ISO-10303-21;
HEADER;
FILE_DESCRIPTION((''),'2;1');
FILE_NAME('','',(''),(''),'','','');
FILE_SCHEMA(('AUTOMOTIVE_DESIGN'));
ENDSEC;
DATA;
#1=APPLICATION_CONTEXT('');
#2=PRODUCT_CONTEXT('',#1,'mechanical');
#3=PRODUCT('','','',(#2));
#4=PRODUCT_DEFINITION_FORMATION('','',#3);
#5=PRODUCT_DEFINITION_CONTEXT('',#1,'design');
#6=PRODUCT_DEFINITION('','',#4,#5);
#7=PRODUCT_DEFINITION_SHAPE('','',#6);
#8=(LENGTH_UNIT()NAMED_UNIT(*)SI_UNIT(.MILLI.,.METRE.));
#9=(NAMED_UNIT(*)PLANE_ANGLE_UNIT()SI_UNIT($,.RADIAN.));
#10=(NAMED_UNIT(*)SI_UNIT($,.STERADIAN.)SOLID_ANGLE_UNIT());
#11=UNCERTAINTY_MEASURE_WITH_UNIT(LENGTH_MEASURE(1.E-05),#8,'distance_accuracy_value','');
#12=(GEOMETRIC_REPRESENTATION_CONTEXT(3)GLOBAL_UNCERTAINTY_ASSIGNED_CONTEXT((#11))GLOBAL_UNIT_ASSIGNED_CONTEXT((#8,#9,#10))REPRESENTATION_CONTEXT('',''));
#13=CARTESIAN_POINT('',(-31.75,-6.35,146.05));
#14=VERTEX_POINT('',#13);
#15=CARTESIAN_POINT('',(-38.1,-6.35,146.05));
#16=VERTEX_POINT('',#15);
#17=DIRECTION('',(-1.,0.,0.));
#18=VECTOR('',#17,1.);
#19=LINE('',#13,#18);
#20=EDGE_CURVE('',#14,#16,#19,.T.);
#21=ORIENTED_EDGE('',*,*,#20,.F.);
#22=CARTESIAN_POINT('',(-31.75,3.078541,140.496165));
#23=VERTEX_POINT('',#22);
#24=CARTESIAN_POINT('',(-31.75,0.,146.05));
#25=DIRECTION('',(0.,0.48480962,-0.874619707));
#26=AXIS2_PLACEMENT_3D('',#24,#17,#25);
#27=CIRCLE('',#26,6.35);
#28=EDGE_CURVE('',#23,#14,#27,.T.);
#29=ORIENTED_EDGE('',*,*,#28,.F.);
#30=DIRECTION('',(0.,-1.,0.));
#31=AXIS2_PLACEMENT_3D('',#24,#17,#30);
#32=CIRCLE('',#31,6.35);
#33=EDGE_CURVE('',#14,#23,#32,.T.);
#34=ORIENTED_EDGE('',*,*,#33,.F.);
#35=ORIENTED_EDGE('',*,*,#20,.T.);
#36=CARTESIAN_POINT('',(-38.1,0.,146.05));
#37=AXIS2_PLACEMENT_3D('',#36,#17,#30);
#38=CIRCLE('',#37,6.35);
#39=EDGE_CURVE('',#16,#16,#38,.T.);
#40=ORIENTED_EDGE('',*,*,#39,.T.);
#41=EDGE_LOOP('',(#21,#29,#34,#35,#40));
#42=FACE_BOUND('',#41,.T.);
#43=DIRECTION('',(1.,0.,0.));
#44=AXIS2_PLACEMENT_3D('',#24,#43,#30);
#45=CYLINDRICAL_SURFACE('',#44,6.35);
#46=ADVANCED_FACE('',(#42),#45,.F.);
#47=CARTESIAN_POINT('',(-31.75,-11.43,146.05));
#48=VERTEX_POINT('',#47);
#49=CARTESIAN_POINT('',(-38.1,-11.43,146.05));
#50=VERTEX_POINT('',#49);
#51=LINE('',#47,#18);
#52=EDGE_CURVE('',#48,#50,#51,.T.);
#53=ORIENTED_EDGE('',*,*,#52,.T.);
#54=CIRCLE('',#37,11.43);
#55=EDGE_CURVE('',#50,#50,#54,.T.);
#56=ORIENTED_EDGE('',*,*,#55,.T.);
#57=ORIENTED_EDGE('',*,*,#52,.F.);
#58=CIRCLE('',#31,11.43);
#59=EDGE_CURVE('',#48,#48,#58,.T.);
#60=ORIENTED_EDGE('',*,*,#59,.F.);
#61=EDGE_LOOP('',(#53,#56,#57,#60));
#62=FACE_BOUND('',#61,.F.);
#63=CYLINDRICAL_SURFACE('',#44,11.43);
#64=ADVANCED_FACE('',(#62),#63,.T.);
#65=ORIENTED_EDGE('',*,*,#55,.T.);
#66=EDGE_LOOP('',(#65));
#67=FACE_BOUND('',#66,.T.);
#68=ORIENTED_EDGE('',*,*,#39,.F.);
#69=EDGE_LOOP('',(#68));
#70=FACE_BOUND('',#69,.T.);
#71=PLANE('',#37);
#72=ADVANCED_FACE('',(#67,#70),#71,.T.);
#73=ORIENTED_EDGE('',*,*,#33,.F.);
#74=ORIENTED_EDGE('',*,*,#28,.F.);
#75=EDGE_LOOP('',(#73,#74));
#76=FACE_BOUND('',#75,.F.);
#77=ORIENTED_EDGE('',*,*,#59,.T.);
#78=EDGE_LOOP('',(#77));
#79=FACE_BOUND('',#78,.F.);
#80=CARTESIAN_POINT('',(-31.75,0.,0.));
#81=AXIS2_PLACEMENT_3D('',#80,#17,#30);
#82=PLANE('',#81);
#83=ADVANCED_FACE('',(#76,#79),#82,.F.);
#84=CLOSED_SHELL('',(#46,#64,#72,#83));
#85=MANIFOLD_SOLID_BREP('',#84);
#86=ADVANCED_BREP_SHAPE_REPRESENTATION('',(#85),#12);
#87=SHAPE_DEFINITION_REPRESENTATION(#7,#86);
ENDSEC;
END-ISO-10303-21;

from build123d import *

# Parameters (mm, degrees)
F0_W      = 63.5
F0_H      = 63.5
F0_W_2    = 50.8
F0_H_2    = 50.8
F1_DEPTH  = 165.1
F3_R      = 6.35
F4_DEPTH  = 25.4
F6_DEPTH  = 25.4
F7_R      = 6.35
F8_DEPTH  = 63.501
F9_W      = 145.7979530096
F9_H      = 377.9422044754
F9_W_2    = 50.8
F9_H_2    = 292.1
F10_DEPTH = 63.5
F11_W     = 97.6704657078
F11_H     = 338.8985395432
F12_DEPTH = 57.151
F13_R     = 11.43
F13_R_2   = 6.35
F14_DEPTH = 6.35
F15_W     = 170.8157360554
F15_H     = 347.1174836159
F16_DEPTH = 25.4


# Not quite as in the source:
# - ends of sketch curves that miss each other by under 0.0002 mm in the source are joined


with BuildPart() as f1:
    # F0 (on Top) → F1 (new body, symmetric)
    with BuildSketch(Plane.XY):
        Rectangle(F0_W, F0_H)
        Rectangle(F0_W_2, F0_H_2, mode=Mode.SUBTRACT)
    extrude(amount=F1_DEPTH, both=True)

    # F3 (on face) → F4 (cut)
    with BuildSketch(Plane.YZ.offset(31.75)):
        with Locations((0, 146.05)):
            Circle(F3_R)
        with BuildLine():
            ThreePointArc((10.1385245046, 129.1766616857), (14.6288058895, 132.8781640138), (17.8406687878, 137.7307595176))
            ThreePointArc((17.8406687878, 137.7307595176), (19.4934269332, 143.3103775076), (19.4426449846, 149.1294124443))
            ThreePointArc((19.4426449846, 149.1294124443), (15.0835370951, 152.2964897102), (11.9164598293, 147.9373818207))
            ThreePointArc((11.9164598293, 147.9373818207), (11.9475842494, 144.3708765369), (10.9346034506, 140.9511106721))
            ThreePointArc((10.9346034506, 140.9511106721), (8.9660423194, 137.9769392343), (6.2139343738, 135.708276517))
            ThreePointArc((6.2139343738, 135.708276517), (4.9104220235, 130.4801740359), (10.1385245046, 129.1766616857))
        make_face()
        with BuildLine():
            ThreePointArc((-10.1385245046, 129.1766616857), (-4.9104220235, 130.4801740359), (-6.2139343738, 135.708276517))
            ThreePointArc((-6.2139343738, 135.708276517), (-8.9660423194, 137.9769392343), (-10.9346034506, 140.9511106721))
            ThreePointArc((-10.9346034506, 140.9511106721), (-11.9475842494, 144.3708765369), (-11.9164598293, 147.9373818207))
            ThreePointArc((-11.9164598293, 147.9373818207), (-15.0835370951, 152.2964897102), (-19.4426449846, 149.1294124443))
            ThreePointArc((-19.4426449846, 149.1294124443), (-19.4934269332, 143.3103775076), (-17.8406687878, 137.7307595176))
            ThreePointArc((-17.8406687878, 137.7307595176), (-14.6288058895, 132.8781640138), (-10.1385245046, 129.1766616857))
        make_face()
    extrude(amount=-F4_DEPTH, mode=Mode.SUBTRACT)

    # F5 (on face) → F6 (cut)
    with BuildSketch(Plane(origin=(-31.75, 0, 0), x_dir=(0, -1, 0), z_dir=(-1, 0, 0))):
        with BuildLine():
            ThreePointArc((-3.0785410886, 140.4961648597), (3.2228686048, 140.5786548312), (6.35, 146.05))
            ThreePointArc((6.35, 146.05), (-3.2228686048, 151.5213451688), (-3.0785410886, 140.4961648597))
        make_face()
        with BuildLine():
            ThreePointArc((-5.7913527214, 132.1654121492), (-6.0549491708, 133.1322727306), (-6.7727903948, 133.8315626913))
            ThreePointArc((-6.7727903948, 133.8315626913), (-9.3377562721, 131.1985515677), (-5.7913527214, 132.1654121492))
        make_face()
        with BuildLine():
            ThreePointArc((3.1226517792, 134.3961049058), (0.4285749428, 129.7298269458), (5.0948529028, 127.0357501095))
            ThreePointArc((5.0948529028, 127.0357501095), (17.8406687878, 137.7307595176), (17.8406687878, 154.3692404824))
            ThreePointArc((17.8406687878, 154.3692404824), (12.777460542, 156.2120975737), (10.9346034506, 151.1488893279))
            ThreePointArc((10.9346034506, 151.1488893279), (10.9346034506, 140.9511106721), (3.1226517792, 134.3961049058))
        make_face()
    extrude(amount=-F6_DEPTH, mode=Mode.SUBTRACT)

    # F7 (on face) → F8 (cut, through all)
    with BuildSketch(Plane.YZ.offset(31.75)):
        with BuildLine():
            ThreePointArc((-8.89, 107.949999693), (-15.239999693, 101.6), (-8.89, 95.250000307))
            ThreePointArc((-8.89, 95.250000307), (3.81, 82.55), (-8.89, 69.85))
            ThreePointArc((-8.89, 69.85), (-15.239999693, 63.5), (-8.89, 57.150000307))
            ThreePointArc((-8.89, 57.150000307), (16.509999693, 82.55), (-8.89, 107.949999693))
        make_face()
        with BuildLine():
            ThreePointArc((8.89, 3.07e-07), (15.239999693, 6.35), (8.89, 12.699999693))
            ThreePointArc((8.89, 12.699999693), (-3.81, 25.4), (8.89, 38.1))
            ThreePointArc((8.89, 38.1), (15.24, 44.45), (8.89, 50.8))
            ThreePointArc((8.89, 50.8), (-16.509999693, 25.4), (8.89, 3.07e-07))
        make_face()
        with BuildLine():
            ThreePointArc((-8.89, -6.350000307), (-15.239999693, -12.7), (-8.89, -19.049999693))
            ThreePointArc((-8.89, -19.049999693), (3.81, -31.75), (-8.89, -44.45))
            ThreePointArc((-8.89, -44.45), (-15.239999693, -50.8), (-8.89, -57.149999693))
            ThreePointArc((-8.89, -57.149999693), (16.509999693, -31.75), (-8.89, -6.350000307))
        make_face()
        with BuildLine():
            ThreePointArc((8.89, -114.299999693), (15.239999693, -107.95), (8.89, -101.600000307))
            ThreePointArc((8.89, -101.600000307), (-3.81, -88.9), (8.89, -76.2))
            ThreePointArc((8.89, -76.2), (15.24, -69.85), (8.89, -63.5))
            ThreePointArc((8.89, -63.5), (-16.509999693, -88.9), (8.89, -114.299999693))
        make_face()
        with Locations((-8.89, 82.55)):
            Circle(F7_R)
        with Locations((8.89, 25.4)):
            Circle(F7_R)
        with Locations((8.89, -88.9)):
            Circle(F7_R)
        with Locations((-8.89, -31.75)):
            Circle(F7_R)
    extrude(amount=-F8_DEPTH, mode=Mode.SUBTRACT)

    # F9 (on face) → F10 (cut, symmetric)
    with BuildSketch(Plane(origin=(25.4, 0, 0), x_dir=(0, -1, 0), z_dir=(-1, 0, 0))):
        Rectangle(F9_W, F9_H)
        with Locations((0, 19.05)):
            Rectangle(F9_W_2, F9_H_2, mode=Mode.SUBTRACT)
    extrude(amount=F10_DEPTH, both=True, mode=Mode.SUBTRACT)

    # F11 (on face) → F12 (cut, through all)
    with BuildSketch(Plane.YZ.offset(-25.4)):
        Rectangle(F11_W, F11_H)
    extrude(amount=F12_DEPTH, mode=Mode.SUBTRACT)

    # F13 (on face) → F14 (join)
    with BuildSketch(Plane(origin=(-31.75, 0, 0), x_dir=(0, -1, 0), z_dir=(-1, 0, 0))):
        with Locations((0, 146.05)):
            Circle(F13_R)
        with Locations((0, 146.05)):
            Circle(F13_R_2, mode=Mode.SUBTRACT)
    extrude(amount=F14_DEPTH)

    # F15 (on face) → F16 (cut)
    with BuildSketch(Plane(origin=(-31.75, 0, 0), x_dir=(0, -1, 0), z_dir=(-1, 0, 0))):
        Rectangle(F15_W, F15_H)
    extrude(amount=-F16_DEPTH, mode=Mode.SUBTRACT)


solid = f1.part
